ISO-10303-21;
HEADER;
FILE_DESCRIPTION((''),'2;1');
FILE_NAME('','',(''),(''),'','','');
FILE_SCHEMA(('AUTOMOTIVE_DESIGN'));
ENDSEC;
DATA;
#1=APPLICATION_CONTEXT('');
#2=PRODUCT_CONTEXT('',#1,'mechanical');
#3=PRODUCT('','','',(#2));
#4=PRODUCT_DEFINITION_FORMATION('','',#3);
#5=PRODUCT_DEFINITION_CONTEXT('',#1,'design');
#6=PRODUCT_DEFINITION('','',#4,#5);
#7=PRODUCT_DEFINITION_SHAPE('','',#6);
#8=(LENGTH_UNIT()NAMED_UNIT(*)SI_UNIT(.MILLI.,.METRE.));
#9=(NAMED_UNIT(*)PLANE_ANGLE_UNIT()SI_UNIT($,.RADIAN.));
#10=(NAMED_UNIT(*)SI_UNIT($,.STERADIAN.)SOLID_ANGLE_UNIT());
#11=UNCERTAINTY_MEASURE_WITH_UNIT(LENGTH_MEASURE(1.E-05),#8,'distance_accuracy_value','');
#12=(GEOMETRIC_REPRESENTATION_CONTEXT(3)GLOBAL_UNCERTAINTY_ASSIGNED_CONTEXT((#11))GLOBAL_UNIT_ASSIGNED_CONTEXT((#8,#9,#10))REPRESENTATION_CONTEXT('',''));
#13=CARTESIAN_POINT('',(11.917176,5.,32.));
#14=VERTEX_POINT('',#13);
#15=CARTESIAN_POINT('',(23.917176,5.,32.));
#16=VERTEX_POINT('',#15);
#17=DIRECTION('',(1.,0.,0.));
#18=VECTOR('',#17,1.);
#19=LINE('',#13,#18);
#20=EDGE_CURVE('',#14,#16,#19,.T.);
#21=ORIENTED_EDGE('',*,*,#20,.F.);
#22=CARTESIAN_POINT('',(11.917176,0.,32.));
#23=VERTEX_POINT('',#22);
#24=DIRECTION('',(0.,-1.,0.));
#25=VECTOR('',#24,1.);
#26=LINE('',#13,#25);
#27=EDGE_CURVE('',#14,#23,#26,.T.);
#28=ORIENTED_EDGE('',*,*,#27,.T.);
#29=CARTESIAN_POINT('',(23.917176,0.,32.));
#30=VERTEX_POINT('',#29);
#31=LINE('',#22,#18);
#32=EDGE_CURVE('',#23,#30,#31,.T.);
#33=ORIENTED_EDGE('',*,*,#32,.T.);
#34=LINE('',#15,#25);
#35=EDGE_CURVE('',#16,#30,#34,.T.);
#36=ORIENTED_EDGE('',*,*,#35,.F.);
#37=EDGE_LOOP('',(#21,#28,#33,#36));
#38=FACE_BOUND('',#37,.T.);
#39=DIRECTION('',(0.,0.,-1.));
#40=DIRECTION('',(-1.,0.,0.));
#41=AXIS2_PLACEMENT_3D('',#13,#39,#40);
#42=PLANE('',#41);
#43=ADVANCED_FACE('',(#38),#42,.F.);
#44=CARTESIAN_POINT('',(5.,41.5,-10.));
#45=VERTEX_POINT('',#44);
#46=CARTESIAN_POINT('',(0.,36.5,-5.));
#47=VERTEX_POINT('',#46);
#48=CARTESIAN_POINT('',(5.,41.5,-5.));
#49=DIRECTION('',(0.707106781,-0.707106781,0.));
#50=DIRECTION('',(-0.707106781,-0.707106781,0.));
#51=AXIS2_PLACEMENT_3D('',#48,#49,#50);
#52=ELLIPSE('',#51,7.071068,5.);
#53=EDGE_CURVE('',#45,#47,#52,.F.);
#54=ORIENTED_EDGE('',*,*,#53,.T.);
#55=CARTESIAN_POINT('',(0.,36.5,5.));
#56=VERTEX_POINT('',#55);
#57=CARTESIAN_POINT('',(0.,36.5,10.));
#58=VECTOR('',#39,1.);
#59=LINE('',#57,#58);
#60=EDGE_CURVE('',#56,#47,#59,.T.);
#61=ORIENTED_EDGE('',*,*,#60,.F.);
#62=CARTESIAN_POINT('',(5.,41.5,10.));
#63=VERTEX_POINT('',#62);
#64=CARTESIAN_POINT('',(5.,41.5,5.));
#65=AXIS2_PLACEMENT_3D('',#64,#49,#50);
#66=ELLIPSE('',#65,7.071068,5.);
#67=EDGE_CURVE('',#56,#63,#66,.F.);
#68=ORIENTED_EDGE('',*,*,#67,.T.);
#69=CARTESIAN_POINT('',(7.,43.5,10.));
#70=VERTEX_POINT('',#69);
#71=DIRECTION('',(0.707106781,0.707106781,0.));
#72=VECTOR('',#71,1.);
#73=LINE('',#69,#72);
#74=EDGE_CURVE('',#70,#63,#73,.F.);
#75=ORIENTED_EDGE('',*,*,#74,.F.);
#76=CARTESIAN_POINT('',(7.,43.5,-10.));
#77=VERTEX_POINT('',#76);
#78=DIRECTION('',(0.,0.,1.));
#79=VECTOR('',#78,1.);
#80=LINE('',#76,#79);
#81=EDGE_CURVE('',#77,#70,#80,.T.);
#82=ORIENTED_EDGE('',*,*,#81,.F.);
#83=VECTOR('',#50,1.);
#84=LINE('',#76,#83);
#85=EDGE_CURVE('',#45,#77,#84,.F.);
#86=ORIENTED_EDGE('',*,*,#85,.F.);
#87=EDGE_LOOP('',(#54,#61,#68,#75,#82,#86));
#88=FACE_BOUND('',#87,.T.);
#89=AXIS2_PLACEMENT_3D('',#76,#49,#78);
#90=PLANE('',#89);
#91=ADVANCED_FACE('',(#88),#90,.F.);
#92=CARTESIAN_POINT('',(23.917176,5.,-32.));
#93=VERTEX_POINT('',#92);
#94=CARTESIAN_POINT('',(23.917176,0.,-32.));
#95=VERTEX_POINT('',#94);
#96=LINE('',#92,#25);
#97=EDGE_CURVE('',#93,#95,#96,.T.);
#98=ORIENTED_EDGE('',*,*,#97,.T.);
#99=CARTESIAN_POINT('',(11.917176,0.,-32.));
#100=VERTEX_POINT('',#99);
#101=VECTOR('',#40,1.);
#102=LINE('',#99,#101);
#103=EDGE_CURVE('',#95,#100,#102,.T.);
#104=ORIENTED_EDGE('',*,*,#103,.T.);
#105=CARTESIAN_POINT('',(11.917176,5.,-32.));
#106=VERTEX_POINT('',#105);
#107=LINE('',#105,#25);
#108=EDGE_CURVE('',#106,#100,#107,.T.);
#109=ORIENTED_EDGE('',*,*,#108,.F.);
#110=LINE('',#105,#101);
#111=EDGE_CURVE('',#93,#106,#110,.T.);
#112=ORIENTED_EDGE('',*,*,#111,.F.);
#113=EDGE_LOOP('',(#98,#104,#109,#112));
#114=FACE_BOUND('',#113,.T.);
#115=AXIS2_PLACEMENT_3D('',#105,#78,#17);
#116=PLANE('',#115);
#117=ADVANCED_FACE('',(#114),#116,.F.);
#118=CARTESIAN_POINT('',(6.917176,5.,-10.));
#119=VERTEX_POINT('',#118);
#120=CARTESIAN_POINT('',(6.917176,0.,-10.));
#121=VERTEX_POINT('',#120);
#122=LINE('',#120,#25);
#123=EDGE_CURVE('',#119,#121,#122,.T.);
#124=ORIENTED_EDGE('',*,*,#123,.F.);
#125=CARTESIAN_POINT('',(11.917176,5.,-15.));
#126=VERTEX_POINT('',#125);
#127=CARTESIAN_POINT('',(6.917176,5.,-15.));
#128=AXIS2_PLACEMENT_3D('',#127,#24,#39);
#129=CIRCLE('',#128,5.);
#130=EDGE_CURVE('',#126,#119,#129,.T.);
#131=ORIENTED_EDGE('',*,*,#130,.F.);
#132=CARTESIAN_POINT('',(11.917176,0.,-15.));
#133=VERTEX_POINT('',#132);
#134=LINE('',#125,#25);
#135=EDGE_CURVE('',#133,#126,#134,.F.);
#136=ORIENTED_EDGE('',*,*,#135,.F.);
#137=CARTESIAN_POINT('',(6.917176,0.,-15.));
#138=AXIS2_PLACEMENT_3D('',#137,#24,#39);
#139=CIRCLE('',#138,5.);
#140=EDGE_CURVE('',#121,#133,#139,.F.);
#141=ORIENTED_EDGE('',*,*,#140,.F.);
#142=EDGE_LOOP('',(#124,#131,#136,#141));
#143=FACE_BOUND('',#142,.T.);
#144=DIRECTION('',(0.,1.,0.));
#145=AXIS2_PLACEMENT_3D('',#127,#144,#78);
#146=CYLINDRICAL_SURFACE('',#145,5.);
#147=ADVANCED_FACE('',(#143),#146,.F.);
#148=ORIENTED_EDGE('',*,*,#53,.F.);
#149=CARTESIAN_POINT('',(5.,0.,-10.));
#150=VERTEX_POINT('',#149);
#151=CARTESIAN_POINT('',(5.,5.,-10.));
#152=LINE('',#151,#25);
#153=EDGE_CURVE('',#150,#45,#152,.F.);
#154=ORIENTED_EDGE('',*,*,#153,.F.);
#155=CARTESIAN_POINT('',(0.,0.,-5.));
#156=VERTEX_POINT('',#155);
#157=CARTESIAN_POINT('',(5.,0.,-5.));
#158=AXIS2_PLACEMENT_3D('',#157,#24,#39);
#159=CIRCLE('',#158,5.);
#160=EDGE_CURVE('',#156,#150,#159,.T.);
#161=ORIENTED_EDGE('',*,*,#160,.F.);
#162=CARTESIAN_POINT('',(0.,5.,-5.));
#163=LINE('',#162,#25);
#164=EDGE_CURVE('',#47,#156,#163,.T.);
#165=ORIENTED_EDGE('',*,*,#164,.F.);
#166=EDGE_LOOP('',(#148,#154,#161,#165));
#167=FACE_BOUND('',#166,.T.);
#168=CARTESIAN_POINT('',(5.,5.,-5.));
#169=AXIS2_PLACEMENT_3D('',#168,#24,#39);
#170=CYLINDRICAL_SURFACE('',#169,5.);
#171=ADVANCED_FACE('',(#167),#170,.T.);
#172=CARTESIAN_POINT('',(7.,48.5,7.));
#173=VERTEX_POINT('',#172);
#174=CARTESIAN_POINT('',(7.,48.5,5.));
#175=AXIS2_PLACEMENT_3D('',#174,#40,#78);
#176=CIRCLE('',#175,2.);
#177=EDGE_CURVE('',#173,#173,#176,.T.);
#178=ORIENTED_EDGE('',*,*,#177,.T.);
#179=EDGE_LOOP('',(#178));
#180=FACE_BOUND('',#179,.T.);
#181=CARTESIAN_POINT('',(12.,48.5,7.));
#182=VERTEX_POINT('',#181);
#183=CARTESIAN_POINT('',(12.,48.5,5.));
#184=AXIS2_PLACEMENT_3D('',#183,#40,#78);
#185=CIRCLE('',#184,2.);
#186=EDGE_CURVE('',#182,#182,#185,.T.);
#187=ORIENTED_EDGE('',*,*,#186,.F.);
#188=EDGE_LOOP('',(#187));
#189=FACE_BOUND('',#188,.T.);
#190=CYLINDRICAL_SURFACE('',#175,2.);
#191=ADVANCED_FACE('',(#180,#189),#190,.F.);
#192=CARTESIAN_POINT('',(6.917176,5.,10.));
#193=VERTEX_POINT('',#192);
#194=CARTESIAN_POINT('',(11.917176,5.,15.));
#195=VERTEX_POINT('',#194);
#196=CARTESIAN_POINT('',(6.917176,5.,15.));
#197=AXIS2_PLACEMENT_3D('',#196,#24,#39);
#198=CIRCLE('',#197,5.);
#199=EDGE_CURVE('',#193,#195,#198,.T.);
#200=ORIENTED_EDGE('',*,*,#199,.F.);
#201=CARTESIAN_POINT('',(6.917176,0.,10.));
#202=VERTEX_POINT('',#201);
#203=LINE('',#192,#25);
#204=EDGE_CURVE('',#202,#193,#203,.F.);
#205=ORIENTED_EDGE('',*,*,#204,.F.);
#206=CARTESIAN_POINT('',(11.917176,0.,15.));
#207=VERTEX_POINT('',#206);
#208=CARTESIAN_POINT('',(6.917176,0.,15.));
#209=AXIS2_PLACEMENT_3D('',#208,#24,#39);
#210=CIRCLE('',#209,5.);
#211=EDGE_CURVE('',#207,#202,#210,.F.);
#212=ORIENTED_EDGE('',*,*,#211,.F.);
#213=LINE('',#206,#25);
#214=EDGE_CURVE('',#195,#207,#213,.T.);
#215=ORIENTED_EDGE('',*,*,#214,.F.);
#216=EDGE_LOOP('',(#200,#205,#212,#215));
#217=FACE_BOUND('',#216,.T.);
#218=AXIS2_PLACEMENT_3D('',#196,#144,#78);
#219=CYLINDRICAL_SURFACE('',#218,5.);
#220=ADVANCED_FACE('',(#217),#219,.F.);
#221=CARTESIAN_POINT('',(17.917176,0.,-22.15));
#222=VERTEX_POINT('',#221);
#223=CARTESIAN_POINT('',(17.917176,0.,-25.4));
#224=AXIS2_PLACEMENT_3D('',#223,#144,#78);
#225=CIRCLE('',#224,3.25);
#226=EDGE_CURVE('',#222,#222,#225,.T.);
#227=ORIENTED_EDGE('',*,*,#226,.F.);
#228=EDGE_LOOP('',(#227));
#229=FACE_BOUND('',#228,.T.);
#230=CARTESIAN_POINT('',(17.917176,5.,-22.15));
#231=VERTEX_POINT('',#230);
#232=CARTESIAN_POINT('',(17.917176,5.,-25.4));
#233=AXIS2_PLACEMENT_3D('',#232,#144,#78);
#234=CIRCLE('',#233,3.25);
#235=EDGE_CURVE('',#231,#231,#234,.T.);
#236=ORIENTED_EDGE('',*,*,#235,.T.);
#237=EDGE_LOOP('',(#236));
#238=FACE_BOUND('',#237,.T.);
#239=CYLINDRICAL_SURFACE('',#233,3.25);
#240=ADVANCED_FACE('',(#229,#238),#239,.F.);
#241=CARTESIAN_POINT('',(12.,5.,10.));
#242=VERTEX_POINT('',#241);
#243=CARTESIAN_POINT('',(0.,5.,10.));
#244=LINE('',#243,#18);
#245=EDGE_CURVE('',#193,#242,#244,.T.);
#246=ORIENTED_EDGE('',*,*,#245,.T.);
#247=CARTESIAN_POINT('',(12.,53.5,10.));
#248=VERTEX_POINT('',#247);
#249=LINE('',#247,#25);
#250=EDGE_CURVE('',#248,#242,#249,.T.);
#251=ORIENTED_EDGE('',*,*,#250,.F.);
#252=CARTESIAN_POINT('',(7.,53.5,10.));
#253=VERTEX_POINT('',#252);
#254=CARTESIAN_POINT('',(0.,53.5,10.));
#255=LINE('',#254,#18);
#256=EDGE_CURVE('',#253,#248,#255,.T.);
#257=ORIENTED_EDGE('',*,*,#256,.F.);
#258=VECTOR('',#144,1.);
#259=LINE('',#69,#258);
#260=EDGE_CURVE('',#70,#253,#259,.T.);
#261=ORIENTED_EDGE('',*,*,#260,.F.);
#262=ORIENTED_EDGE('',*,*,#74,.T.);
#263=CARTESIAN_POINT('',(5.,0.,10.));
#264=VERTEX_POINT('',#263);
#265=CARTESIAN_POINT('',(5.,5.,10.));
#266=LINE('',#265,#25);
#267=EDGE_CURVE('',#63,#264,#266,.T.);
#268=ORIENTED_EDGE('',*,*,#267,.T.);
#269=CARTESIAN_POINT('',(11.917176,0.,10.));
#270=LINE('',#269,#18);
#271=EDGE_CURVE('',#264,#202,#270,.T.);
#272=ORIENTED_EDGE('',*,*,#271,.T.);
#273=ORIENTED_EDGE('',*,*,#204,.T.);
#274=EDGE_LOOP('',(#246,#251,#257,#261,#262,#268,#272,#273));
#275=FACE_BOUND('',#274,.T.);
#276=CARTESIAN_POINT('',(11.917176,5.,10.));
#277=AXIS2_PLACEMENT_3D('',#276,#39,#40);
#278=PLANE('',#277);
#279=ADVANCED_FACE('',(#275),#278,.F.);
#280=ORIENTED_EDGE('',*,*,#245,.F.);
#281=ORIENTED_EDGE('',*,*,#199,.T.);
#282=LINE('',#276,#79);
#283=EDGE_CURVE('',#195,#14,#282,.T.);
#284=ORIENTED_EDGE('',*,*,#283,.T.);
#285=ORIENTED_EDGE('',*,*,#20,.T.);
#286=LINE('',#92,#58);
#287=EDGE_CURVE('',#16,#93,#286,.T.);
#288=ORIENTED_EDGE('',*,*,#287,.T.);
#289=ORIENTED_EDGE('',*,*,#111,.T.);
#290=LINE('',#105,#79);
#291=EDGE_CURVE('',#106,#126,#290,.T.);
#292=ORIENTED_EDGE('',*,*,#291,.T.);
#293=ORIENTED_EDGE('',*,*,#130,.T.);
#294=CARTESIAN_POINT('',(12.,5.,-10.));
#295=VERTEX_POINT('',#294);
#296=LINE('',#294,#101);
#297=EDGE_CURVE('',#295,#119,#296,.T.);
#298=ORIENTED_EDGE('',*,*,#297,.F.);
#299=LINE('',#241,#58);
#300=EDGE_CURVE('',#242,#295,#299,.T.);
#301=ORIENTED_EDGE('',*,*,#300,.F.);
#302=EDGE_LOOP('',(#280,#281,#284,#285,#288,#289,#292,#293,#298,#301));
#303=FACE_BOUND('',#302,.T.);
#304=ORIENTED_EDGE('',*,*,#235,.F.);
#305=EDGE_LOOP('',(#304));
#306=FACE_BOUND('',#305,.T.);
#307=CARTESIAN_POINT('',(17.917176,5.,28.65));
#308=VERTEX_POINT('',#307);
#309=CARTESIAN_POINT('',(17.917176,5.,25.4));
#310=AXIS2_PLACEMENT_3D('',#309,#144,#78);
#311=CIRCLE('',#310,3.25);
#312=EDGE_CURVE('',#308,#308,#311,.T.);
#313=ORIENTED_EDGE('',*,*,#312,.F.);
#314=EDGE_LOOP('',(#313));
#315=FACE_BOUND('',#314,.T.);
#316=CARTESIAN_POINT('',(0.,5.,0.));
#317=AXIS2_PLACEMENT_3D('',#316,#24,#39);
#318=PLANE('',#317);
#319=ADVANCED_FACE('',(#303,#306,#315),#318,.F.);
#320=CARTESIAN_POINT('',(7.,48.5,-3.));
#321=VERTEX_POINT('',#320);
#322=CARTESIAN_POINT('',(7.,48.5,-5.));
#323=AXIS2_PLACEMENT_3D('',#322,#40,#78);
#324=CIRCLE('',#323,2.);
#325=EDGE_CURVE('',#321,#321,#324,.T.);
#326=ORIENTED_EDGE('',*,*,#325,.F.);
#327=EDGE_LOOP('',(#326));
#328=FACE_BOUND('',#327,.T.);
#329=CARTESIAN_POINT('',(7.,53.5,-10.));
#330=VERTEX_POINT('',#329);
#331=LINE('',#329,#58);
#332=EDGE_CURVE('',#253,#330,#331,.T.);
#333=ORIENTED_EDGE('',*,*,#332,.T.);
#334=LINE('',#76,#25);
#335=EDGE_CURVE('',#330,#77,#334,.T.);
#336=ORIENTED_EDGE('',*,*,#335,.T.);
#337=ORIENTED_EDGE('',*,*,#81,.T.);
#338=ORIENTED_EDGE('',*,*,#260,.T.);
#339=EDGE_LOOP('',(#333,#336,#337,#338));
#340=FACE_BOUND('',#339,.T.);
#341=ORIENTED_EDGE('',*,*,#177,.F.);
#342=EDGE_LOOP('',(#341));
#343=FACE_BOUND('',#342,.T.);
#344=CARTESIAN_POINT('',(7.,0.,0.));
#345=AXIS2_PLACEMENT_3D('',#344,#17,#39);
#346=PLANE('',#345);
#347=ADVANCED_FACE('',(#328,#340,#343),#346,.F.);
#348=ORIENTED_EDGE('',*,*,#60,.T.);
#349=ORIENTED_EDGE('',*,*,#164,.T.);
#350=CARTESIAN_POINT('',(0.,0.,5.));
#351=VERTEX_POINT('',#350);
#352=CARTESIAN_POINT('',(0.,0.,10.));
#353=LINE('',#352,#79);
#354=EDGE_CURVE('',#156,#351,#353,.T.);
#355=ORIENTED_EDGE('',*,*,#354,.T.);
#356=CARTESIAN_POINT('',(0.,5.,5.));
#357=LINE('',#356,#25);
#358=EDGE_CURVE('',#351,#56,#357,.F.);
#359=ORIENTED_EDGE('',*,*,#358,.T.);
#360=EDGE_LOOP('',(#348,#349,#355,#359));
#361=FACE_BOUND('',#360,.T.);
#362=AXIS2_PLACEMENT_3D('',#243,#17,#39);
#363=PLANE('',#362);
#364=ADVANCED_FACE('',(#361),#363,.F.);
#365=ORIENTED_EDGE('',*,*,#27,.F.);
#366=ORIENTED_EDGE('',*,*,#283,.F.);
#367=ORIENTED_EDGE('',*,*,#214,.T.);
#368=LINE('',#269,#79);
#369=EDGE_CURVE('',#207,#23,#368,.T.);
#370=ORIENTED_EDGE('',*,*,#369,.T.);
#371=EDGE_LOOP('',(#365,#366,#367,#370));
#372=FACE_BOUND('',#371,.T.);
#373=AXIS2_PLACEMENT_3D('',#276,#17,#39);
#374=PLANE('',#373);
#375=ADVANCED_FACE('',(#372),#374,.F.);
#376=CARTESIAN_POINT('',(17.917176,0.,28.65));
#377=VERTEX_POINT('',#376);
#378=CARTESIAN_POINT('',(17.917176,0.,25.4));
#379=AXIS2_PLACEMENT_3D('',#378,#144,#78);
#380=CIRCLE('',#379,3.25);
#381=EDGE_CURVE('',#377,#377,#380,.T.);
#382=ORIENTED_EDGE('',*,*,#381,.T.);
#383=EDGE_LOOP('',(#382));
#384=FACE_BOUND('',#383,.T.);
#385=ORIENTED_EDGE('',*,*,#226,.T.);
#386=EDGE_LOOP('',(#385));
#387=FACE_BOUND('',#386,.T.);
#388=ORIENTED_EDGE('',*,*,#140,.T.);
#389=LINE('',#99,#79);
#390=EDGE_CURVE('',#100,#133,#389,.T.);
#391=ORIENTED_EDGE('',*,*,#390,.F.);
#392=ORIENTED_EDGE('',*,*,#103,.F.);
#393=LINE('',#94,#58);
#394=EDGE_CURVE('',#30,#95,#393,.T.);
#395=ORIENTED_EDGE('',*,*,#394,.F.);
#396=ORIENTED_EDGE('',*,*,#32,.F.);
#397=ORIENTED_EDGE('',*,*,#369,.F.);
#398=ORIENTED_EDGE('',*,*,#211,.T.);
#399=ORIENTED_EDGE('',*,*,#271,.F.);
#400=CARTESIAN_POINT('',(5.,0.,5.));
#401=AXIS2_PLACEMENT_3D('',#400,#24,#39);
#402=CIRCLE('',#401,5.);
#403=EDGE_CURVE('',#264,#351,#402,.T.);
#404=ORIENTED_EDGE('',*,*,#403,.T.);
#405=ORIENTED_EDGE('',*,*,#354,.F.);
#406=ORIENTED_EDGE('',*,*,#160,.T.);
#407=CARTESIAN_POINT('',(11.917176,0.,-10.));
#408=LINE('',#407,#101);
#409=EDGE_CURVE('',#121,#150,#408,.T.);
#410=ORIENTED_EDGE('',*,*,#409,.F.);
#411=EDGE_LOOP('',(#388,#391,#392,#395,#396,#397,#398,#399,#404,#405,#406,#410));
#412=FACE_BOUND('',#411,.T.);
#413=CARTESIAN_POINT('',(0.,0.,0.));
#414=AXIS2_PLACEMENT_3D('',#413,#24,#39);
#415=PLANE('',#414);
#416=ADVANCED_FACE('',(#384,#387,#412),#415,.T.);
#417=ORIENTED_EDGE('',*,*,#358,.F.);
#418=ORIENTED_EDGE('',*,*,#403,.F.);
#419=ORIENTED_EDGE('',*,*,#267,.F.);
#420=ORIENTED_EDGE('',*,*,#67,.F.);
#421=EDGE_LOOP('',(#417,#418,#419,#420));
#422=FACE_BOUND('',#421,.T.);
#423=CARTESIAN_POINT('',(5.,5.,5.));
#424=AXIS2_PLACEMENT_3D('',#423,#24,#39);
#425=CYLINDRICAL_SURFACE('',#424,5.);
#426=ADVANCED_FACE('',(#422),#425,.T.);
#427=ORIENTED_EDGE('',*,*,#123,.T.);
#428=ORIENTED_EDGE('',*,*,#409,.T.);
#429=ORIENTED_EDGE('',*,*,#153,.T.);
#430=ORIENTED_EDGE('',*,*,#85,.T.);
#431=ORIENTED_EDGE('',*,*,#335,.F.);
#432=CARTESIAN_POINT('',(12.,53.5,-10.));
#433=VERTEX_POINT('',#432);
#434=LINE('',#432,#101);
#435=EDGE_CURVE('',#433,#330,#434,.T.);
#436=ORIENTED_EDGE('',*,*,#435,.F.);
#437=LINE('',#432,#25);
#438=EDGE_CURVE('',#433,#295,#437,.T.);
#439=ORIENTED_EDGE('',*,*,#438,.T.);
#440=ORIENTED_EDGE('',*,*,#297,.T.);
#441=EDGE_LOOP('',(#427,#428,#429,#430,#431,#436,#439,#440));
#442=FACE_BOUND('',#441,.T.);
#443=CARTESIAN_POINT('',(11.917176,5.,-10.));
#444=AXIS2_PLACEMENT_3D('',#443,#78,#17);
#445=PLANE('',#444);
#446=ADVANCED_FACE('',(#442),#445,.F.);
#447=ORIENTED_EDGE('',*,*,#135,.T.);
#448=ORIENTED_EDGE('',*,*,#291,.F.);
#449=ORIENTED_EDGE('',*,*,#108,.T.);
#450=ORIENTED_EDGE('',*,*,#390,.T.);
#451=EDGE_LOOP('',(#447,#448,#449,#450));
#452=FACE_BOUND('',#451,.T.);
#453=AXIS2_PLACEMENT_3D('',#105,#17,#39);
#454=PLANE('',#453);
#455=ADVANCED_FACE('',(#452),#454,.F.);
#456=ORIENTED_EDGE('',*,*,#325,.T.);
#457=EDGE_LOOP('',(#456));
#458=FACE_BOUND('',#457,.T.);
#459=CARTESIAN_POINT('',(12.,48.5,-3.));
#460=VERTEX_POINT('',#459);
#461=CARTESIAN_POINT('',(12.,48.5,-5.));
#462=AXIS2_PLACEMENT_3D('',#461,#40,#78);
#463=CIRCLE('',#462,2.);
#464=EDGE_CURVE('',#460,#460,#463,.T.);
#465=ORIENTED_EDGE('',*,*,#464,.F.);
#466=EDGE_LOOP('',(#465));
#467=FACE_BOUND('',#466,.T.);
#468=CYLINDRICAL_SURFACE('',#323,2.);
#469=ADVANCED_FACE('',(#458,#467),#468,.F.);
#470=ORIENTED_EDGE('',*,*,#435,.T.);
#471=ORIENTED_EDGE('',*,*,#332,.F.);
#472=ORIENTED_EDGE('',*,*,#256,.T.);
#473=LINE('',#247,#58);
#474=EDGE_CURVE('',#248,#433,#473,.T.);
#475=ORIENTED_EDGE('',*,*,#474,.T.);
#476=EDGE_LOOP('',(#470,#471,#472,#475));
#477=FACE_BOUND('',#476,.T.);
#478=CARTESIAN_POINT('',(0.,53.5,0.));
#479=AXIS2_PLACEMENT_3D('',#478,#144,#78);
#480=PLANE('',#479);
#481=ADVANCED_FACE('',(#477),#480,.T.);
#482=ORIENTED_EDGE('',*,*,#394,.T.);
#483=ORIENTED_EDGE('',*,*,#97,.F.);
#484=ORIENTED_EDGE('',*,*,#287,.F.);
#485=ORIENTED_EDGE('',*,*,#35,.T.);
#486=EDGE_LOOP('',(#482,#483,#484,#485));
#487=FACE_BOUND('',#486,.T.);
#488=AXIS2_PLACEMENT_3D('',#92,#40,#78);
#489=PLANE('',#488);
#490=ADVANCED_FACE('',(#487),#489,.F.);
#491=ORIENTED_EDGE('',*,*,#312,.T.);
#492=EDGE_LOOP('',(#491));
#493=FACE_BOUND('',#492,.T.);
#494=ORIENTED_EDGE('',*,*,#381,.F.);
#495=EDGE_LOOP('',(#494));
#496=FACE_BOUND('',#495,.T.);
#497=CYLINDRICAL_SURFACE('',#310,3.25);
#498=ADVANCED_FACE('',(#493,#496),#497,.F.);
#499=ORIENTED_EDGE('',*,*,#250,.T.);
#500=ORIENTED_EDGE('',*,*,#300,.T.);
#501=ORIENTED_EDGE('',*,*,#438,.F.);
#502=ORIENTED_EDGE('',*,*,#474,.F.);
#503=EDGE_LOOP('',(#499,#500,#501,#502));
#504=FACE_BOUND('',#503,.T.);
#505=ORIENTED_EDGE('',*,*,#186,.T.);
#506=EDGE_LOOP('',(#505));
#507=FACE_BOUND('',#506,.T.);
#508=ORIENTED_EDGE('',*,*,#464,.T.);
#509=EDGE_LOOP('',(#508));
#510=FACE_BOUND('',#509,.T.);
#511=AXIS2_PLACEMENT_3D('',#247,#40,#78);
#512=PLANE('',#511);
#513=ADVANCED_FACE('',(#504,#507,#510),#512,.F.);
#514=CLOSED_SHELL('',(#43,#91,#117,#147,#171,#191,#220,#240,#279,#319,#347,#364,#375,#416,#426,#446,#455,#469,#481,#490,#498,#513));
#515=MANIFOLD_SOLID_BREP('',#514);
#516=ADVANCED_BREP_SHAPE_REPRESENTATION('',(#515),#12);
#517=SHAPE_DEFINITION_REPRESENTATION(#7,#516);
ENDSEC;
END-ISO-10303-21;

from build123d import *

# Parameters (mm, degrees)
BOSS_EXTRUDE1_DEPTH                = 5
F_1_4_0_25_CLEARANCE_DOWEL_HOLE2_D = 6.499999954
SKETCH4_W                          = 12
SKETCH4_H                          = 20
BOSS_EXTRUDE2_DEPTH                = 48.5
SKETCH5_W                          = 20
SKETCH5_H                          = 10
CUT_EXTRUDE1_DEPTH                 = 7
F_4_0MM_CLEARANCE_DOWEL_HOLE1_D    = 4
CHAMFER1_SIZE                      = 7
FILLET1_R                          = 5


with BuildPart() as part:
    # Sketch1 → Boss-Extrude1 (new body)
    with BuildSketch(Plane(origin=(0, 0, 0), x_dir=(1, 0, 0), z_dir=(0, 1, 0))):
        Polygon((0, -10), (0, 10), (11.917176452, 10), (11.917176452, 32), (23.917176452, 32), (23.917176452, -32), (11.917176452, -32), (11.917176452, -10), align=None)
    extrude(amount=BOSS_EXTRUDE1_DEPTH)

    # 1/4 (0.25) Clearance Dowel Hole2 (through all)
    with Locations(Plane(origin=(0, 5, 0), x_dir=(1, 0, 0), z_dir=(0, 1, 0))):
        with Locations((17.917176452, -25.4), (17.917176452, 25.4)):
            Hole(F_1_4_0_25_CLEARANCE_DOWEL_HOLE2_D / 2)

    # Sketch4 → Boss-Extrude2 (add)
    with BuildSketch(Plane(origin=(0, 5, 0), x_dir=(1, 0, 0), z_dir=(0, 1, 0))):
        with Locations((6, 0)):
            Rectangle(SKETCH4_W, SKETCH4_H)
    extrude(amount=BOSS_EXTRUDE2_DEPTH)

    # Sketch5 → Cut-Extrude1 (cut)
    with BuildSketch(Plane.ZY):
        with Locations((0, 48.5)):
            Rectangle(SKETCH5_W, SKETCH5_H)
    extrude(amount=-CUT_EXTRUDE1_DEPTH, mode=Mode.SUBTRACT)

    # Ø4.0mm Clearance Dowel Hole1 (through all)
    with Locations(Plane.ZY.offset(-7)):
        with Locations((-5, 48.5), (5, 48.5)):
            Hole(F_4_0MM_CLEARANCE_DOWEL_HOLE1_D / 2)

    # Chamfer1
    chamfer1_edges = [part.edges().sort_by_distance(p)[0] for p in [
        (0, 43.5, 0),
    ]]
    chamfer(chamfer1_edges, length=CHAMFER1_SIZE - 0.0001)  # a hair under: the kernel refuses the full size

    # Fillet1
    fillet1_edges = [part.edges().sort_by_distance(p)[0] for p in [
        (11.917176452, 2.5, 10),
        (11.917176452, 2.5, -10),
        (0, 18.25005, 10),
        (0, 18.25005, -10),
    ]]
    fillet(fillet1_edges, radius=FILLET1_R)


solid = part.part
